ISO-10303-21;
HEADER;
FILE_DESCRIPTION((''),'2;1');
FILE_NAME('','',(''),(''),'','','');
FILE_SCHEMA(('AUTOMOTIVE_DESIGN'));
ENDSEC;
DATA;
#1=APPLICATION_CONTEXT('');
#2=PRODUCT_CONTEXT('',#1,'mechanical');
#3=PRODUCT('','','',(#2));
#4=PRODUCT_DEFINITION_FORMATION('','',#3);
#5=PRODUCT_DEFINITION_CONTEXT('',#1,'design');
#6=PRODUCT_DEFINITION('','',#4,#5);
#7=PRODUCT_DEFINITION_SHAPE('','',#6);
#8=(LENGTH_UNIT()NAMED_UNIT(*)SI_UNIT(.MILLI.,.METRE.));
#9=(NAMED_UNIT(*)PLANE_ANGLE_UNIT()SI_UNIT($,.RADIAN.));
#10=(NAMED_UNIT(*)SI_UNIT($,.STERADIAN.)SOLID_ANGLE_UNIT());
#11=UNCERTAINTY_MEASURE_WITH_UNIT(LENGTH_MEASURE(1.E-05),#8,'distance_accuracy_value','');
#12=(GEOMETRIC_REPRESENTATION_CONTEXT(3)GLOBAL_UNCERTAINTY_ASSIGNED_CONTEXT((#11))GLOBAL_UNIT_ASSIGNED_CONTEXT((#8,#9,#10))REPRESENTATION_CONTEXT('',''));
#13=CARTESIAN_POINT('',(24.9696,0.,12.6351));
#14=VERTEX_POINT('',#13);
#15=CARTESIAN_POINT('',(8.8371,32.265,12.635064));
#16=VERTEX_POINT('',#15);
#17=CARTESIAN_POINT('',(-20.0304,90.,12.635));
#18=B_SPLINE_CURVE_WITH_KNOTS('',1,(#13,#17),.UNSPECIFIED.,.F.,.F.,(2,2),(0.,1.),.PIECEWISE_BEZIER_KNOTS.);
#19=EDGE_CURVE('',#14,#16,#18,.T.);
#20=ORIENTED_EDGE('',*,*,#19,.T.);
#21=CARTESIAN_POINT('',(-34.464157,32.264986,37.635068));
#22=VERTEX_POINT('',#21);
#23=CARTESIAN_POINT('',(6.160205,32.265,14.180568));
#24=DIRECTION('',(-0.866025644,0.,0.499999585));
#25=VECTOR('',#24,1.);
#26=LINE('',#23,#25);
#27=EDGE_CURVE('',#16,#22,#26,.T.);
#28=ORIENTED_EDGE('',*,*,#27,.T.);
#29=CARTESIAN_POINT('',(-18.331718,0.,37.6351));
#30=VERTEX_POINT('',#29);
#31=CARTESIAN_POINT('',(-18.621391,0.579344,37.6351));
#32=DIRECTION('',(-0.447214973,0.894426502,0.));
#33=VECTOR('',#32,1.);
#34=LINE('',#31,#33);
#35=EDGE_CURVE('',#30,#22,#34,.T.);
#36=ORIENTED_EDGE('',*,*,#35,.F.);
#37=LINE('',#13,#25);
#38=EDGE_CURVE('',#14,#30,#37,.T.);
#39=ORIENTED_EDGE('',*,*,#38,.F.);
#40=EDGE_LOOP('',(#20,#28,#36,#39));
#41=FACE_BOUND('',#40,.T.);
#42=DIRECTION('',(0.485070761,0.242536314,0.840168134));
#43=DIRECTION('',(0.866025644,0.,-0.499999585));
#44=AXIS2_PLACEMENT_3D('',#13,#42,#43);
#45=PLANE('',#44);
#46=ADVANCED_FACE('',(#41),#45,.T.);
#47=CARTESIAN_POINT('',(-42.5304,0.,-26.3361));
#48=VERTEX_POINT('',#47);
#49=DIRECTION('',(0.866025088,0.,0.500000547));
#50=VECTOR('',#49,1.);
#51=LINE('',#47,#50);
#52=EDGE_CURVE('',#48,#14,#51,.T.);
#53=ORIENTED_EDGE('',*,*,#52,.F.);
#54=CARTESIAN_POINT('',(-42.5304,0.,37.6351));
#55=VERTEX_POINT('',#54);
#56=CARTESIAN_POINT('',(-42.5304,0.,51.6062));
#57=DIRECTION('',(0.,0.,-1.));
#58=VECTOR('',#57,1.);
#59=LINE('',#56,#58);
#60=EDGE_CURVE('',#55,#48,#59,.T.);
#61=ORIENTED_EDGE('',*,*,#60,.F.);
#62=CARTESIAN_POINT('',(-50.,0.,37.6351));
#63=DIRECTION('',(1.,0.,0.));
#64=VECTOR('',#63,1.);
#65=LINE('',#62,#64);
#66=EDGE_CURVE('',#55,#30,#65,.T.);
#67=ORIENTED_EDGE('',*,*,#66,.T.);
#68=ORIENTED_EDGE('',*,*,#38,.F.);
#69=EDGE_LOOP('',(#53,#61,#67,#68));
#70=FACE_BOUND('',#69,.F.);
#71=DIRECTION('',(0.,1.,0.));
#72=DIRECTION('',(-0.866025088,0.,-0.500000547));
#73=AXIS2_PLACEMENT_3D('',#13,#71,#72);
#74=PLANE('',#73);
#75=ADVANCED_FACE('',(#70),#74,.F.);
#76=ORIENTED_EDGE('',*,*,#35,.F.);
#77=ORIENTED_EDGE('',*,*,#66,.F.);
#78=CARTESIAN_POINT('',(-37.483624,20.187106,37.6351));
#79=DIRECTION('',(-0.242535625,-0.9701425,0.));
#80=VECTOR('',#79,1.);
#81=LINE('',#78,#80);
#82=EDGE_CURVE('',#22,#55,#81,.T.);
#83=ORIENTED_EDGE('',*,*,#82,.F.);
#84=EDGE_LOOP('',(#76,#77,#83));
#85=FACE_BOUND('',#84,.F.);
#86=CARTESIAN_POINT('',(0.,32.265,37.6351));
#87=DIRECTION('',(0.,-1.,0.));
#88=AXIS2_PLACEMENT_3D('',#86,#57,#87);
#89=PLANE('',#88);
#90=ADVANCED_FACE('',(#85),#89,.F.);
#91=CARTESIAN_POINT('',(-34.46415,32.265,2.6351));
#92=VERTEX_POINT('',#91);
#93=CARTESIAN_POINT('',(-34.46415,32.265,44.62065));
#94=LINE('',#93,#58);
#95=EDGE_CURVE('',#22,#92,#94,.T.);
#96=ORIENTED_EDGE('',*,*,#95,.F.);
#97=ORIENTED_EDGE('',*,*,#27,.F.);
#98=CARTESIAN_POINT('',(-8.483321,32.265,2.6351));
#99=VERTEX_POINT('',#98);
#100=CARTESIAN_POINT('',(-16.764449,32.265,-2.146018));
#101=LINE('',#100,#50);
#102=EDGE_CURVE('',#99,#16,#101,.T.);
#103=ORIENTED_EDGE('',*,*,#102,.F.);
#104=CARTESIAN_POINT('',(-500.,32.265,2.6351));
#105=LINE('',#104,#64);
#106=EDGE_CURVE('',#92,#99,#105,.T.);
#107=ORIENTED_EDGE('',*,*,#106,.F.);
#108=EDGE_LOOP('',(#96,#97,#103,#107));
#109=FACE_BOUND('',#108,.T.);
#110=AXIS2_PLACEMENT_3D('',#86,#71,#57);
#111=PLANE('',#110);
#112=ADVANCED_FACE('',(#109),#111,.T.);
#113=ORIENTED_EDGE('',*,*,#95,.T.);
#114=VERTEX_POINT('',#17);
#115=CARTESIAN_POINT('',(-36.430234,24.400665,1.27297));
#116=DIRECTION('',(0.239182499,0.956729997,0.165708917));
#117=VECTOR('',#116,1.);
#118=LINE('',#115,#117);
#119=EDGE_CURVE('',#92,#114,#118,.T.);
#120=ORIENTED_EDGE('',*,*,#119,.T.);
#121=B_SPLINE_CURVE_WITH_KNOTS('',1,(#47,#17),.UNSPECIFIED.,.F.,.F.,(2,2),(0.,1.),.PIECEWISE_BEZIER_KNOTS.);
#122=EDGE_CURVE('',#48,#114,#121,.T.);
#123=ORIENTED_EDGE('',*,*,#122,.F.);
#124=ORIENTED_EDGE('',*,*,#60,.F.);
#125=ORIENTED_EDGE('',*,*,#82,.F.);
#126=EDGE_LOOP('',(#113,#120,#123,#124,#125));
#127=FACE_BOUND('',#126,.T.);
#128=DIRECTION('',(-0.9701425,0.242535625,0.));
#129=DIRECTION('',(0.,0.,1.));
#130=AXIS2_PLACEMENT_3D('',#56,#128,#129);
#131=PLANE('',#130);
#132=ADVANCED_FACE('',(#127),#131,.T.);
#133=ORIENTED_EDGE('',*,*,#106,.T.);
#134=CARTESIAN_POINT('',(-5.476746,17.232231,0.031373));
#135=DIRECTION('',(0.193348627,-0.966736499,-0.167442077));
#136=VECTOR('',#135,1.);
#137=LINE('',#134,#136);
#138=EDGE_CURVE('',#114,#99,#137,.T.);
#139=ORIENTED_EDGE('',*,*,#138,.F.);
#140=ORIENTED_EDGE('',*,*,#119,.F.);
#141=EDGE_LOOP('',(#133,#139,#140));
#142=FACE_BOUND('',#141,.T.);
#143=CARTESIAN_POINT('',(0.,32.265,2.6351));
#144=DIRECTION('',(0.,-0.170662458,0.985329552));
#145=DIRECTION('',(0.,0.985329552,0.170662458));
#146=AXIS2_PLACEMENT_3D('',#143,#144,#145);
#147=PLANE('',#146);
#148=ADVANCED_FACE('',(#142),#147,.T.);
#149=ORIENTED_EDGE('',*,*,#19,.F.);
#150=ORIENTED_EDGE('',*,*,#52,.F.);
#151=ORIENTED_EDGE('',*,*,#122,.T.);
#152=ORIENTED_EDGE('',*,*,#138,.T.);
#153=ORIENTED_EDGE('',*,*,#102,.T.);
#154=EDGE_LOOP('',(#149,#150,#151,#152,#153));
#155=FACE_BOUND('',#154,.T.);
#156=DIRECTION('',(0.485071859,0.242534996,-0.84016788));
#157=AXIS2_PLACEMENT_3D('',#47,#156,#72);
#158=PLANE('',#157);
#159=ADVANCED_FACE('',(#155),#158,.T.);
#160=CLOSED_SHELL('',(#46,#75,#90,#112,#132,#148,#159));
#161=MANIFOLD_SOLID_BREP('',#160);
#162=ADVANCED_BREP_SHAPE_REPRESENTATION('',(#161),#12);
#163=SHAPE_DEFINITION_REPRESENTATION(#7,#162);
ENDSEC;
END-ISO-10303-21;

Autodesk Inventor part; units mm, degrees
ref_plane "YZ Plane" through (0, 0, 0) normal (1, 0, 0) x (0, 1, 0)
ref_plane "XZ Plane" through (0, 0, 0) normal (0, 1, 0) x (-1, 0, 0)
ref_plane "XY Plane" through (0, 0, 0) normal (0, 0, 1) x (1, 0, 0)
sketch "Эскиз1" plane through (0, 0, 0) normal (0, 1, 0) x (-1, 0, 0)
  line L0 (-24.9696, 12.6351) -> (42.5304, 51.6062)
  line L1 (42.5304, 51.6062) -> (42.5304, -26.3361)
  line L2 (42.5304, -26.3361) -> (-24.9696, 12.6351)
  point P0 (0, 0)
  point P1 (20.0304, 12.6351)
ref_plane "РабПлоскость2" through (0, 90, 0) normal (0, 1, 0) x (-1, 0, 0)
ref_plane "РабПлоскость1" through (0, 0, 0) normal (0, 1, 0) x (-1, 0, 0)
sketch "Эскиз3" plane through (0, 90, 0) normal (0, 1, 0) x (-1, 0, 0)
  point P0 (0, 0)
  point P1 (20.0304, 12.635)
loft "Лофт1" add profiles "Эскиз1" section 2 point at (-20.0304, 90, 12.635)
sketch "Эскиз4" plane through (0, 0, 0) normal (1, 0, 0) x (0, 1, 0)
  line L0 (0, 51.6062) -> (90, 12.635) projected
  line L1 (32.265, 37.6351) -> (32.265, 12.6351)
  line L2 (0, 12.6351) -> (90, 12.635) projected
  line L3 (32.265, 12.6351) -> (32.265, 2.6351)
  line L4 (0, -26.3361) -> (90, 12.635) projected
  line L5 (32.265, 2.6351) -> (90, 12.635)
  point P0 (0, 0)
  dimension "d6" = 25
  dimension "d7" = 10
extrude "Выдавливание1" cut sketch "Эскиз4" along normal mid plane 1000
sketch "Эскиз5" plane through (0, 0, 0) normal (1, 0, 0) x (0, 1, 0)
  line L0 (0, 51.6062) -> (32.265, 37.6351) projected
  line L1 (32.265, 37.6351) -> (0, 37.6351)
  line L2 (0, 51.6062) -> (0, -26.3361) projected
  point P0 (0, 0)
extrude "Выдавливание2" cut sketch "Эскиз5" along normal mid plane 100
